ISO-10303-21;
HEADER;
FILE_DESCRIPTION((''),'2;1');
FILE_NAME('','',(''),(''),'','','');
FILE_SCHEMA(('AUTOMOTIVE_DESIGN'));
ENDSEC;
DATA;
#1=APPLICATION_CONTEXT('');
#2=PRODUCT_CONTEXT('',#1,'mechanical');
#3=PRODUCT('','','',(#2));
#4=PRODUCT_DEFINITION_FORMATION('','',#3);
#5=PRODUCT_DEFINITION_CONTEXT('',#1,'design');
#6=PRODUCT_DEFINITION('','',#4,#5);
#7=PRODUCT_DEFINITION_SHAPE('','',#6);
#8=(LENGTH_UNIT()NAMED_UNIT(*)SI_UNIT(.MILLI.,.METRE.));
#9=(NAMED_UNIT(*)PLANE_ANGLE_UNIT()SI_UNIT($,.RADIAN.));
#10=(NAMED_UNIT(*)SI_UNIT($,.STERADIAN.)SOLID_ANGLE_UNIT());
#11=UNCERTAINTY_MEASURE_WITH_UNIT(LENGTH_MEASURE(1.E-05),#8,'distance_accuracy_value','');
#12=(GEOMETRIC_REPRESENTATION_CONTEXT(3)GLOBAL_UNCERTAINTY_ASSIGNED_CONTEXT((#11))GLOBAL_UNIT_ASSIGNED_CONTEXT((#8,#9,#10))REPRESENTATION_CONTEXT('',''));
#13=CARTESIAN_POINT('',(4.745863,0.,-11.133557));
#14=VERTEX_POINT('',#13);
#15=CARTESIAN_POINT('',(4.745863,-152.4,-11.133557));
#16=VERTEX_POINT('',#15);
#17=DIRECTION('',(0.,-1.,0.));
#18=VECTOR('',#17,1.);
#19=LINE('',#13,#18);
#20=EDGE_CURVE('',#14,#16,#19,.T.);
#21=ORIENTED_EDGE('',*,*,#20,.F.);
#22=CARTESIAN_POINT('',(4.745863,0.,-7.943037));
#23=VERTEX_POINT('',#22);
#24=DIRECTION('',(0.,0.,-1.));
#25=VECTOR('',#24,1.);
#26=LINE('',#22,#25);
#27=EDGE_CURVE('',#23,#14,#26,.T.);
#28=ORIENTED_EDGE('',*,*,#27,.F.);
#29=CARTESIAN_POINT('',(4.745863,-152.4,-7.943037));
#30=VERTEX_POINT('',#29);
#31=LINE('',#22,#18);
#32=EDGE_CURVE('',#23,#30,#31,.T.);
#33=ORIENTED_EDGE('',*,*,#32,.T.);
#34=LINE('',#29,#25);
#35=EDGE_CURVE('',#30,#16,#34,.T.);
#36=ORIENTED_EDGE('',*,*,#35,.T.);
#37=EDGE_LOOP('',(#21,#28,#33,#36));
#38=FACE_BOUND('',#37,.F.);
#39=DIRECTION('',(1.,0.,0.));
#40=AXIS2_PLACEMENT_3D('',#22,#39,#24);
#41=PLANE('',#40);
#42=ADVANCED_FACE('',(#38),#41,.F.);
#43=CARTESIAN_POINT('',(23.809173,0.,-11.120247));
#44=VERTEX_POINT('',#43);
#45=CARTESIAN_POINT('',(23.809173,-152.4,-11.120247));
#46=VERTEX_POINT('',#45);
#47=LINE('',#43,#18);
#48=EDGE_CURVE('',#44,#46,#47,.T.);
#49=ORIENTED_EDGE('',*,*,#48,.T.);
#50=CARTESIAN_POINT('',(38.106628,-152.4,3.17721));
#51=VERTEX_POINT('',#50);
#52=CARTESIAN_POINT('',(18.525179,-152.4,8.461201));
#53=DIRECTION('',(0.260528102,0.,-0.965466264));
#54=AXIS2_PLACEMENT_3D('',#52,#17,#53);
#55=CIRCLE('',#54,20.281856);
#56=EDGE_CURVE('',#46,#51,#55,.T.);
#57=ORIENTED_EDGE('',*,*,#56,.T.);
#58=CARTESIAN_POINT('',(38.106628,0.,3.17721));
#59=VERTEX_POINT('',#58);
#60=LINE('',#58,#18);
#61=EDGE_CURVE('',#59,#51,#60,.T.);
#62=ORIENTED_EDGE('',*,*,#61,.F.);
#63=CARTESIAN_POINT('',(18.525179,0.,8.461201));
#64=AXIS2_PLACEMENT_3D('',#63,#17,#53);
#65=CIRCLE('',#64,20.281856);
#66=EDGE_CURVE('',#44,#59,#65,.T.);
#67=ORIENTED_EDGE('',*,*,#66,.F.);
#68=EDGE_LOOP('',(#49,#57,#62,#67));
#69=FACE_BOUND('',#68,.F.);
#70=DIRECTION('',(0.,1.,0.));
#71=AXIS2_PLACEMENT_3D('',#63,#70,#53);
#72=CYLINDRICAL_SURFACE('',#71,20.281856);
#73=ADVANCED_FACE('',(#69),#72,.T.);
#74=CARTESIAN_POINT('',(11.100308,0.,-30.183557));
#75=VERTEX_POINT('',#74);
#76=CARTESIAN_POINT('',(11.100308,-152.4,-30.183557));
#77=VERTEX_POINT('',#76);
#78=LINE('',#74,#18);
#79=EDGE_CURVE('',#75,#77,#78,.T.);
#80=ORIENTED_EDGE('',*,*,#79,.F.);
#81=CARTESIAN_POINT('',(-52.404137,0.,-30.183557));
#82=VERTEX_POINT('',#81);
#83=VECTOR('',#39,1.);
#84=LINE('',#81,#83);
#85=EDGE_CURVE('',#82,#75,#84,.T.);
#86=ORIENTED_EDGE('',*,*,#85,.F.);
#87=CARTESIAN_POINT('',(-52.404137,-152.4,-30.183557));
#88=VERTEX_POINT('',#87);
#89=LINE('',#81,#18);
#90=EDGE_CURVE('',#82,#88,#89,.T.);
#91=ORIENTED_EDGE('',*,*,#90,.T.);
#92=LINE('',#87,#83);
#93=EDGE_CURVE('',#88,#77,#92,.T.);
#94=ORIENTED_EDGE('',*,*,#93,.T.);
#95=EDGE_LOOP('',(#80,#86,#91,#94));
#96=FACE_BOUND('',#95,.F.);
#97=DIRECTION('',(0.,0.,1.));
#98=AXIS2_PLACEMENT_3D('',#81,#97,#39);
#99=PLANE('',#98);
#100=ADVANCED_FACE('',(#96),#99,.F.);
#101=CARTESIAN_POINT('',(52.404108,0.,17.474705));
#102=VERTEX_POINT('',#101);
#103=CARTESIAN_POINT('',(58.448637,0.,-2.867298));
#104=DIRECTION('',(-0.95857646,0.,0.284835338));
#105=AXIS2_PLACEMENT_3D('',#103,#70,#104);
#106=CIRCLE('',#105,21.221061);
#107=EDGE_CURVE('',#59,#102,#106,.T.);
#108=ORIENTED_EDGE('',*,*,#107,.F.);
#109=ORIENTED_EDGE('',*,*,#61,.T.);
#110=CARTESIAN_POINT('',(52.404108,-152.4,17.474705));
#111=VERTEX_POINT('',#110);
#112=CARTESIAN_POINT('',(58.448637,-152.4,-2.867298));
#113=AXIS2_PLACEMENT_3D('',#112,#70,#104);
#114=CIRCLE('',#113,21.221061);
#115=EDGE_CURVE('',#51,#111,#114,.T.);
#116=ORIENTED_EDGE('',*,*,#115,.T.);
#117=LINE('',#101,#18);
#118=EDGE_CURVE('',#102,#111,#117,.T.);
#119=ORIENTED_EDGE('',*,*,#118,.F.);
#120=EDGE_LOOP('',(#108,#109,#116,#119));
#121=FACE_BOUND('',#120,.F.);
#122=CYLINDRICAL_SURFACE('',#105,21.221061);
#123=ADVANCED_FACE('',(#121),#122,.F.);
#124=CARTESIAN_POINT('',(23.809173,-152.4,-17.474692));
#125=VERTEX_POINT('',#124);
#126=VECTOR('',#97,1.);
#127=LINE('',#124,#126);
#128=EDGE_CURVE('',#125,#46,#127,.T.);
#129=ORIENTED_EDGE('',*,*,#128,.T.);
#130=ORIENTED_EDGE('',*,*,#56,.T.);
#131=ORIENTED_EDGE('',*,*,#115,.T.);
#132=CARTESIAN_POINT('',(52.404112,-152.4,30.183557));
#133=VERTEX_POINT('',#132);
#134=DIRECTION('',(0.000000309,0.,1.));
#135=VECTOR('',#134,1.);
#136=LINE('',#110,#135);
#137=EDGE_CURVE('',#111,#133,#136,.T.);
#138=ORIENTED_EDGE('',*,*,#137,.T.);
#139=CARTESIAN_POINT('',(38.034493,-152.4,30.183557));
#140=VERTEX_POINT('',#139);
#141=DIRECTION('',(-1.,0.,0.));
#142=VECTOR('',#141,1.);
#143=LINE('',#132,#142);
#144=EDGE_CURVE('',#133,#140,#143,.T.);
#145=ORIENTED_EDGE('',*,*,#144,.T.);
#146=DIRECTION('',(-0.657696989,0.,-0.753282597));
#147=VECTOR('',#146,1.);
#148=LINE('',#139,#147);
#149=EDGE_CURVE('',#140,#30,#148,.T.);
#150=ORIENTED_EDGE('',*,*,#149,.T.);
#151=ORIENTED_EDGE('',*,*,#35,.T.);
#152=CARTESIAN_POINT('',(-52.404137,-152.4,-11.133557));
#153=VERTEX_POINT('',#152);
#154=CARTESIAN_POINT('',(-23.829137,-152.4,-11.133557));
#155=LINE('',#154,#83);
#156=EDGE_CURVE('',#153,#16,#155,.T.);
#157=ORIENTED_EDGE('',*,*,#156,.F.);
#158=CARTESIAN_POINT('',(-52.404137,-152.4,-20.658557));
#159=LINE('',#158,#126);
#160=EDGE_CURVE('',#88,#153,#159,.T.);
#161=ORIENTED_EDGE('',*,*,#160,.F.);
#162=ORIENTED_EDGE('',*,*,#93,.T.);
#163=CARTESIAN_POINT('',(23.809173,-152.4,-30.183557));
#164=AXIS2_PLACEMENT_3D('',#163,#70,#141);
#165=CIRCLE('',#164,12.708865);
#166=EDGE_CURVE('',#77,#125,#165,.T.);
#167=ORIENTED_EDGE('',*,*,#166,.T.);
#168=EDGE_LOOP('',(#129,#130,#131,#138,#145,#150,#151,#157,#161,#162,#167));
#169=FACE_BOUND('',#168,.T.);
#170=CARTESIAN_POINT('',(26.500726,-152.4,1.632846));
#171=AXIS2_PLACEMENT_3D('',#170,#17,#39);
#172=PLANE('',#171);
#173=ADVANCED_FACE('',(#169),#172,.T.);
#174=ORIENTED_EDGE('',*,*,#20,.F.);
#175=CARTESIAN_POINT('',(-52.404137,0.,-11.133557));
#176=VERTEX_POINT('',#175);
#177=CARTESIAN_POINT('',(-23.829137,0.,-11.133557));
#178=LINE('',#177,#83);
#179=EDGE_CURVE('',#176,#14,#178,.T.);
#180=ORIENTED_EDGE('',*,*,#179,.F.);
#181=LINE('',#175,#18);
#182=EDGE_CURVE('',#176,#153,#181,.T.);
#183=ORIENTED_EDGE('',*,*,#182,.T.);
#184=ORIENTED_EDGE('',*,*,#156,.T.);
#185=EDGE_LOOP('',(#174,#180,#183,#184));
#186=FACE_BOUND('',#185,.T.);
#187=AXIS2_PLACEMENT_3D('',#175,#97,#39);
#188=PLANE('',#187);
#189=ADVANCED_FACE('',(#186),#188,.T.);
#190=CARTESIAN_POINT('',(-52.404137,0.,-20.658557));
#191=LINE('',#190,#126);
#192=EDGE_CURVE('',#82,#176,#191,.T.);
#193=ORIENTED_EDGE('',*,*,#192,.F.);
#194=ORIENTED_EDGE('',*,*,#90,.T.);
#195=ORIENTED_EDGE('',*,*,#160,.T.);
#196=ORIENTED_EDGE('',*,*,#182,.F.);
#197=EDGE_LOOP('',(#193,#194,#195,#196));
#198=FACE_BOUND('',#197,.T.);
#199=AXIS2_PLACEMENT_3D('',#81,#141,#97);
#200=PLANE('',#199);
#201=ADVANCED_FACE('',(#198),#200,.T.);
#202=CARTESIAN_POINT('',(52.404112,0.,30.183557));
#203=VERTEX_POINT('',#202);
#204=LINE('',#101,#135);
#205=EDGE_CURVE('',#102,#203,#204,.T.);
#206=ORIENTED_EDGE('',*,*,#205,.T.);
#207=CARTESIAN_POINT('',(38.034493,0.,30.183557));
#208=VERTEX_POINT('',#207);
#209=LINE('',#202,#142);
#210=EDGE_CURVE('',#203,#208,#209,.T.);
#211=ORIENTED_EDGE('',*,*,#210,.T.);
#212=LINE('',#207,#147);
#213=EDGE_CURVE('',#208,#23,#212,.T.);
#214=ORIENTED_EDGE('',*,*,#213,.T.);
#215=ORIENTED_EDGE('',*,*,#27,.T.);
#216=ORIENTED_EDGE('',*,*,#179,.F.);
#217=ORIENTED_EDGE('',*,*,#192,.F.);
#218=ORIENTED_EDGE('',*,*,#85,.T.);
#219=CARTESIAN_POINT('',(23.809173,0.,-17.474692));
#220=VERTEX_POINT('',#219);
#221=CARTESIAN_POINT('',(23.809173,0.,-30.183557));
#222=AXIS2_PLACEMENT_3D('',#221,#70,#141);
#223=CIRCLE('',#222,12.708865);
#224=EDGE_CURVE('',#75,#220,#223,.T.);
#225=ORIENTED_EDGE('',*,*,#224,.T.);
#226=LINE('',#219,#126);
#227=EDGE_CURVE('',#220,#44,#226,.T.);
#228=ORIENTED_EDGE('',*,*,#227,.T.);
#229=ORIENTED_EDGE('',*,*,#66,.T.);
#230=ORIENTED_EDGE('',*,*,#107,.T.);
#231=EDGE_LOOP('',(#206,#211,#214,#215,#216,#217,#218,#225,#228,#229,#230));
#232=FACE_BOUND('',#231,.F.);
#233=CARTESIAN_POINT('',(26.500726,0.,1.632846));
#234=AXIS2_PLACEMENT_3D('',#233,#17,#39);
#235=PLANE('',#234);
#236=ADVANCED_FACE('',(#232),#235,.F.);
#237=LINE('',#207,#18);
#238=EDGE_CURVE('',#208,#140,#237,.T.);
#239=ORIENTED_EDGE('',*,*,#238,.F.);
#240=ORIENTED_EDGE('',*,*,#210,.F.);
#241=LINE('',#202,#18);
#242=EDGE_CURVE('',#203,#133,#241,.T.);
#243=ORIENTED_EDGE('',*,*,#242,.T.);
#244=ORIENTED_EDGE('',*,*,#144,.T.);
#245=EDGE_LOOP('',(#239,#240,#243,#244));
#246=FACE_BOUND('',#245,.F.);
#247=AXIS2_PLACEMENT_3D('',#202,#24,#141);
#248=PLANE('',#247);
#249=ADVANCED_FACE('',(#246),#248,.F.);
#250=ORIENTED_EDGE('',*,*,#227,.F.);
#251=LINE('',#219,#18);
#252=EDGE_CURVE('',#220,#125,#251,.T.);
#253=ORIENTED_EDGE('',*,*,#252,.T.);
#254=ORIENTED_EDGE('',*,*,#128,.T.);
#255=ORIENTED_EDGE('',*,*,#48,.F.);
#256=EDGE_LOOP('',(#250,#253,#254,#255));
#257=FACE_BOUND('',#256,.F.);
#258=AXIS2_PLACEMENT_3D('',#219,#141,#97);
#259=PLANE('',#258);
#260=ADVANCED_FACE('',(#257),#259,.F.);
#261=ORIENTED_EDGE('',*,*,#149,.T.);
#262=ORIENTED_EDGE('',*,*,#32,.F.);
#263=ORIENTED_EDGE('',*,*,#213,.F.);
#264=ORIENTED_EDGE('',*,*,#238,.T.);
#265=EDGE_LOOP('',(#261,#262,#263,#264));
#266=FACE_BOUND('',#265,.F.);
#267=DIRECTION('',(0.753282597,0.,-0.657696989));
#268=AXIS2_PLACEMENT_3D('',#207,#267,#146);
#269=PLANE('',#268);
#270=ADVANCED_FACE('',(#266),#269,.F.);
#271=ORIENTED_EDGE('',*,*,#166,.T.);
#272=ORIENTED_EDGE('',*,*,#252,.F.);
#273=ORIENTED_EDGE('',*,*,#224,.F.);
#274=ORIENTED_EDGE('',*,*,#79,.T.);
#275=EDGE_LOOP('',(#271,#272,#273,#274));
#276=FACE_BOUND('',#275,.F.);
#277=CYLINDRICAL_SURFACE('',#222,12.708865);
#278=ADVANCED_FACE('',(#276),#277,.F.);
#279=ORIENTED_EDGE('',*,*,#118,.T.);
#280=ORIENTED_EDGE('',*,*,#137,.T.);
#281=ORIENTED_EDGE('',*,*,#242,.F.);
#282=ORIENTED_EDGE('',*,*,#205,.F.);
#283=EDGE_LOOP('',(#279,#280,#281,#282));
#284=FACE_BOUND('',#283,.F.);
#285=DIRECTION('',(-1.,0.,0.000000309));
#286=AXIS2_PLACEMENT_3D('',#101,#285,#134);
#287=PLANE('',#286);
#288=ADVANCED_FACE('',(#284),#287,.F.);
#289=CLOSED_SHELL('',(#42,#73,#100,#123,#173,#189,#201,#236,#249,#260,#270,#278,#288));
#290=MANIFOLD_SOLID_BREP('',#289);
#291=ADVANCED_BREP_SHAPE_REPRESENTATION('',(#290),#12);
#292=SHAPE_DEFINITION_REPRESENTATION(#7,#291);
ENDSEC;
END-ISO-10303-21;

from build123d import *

# Parameters (mm, degrees)
F0_W     = 57.15
F0_H     = 19.05
F1_DEPTH = 152.4


# Not quite as in the source:
# - ends of sketch curves that miss each other by under 0.0002 mm in the source are joined


with BuildPart() as f1:
    # F0 (on Front) → F1 (new body)
    with BuildSketch(Plane.XZ):
        with BuildLine():
            Line((4.745863, -11.1335566), (4.745863, -30.1835566))
            Line((4.745863, -30.1835566), (11.100308, -30.1835566))
            ThreePointArc((11.100308, -30.1835566), (14.8226482602, -21.1970322602), (23.8091726, -17.474692))
            Line((23.8091726, -17.474692), (23.8091726, -11.120247))
            ThreePointArc((23.8091726, -11.120247), (32.8666183043, -5.8802359043), (38.1066276666, 3.1772102678))
            ThreePointArc((38.1066276666, 3.1772102678), (43.4430736289, 12.1382508388), (52.4041076698, 17.4747052267))
            Line((52.4041076698, 17.4747052267), (52.4041116, 30.1835566))
            Line((52.4041116, 30.1835566), (38.0344934, 30.1835566))
            Line((38.0344934, 30.1835566), (4.745863, -7.9430372))
            Line((4.745863, -7.9430372), (4.745863, -11.1335566))
        make_face()
        with Locations((-23.829137, -20.6585566)):
            Rectangle(F0_W, F0_H)
    extrude(amount=F1_DEPTH)


solid = f1.part
